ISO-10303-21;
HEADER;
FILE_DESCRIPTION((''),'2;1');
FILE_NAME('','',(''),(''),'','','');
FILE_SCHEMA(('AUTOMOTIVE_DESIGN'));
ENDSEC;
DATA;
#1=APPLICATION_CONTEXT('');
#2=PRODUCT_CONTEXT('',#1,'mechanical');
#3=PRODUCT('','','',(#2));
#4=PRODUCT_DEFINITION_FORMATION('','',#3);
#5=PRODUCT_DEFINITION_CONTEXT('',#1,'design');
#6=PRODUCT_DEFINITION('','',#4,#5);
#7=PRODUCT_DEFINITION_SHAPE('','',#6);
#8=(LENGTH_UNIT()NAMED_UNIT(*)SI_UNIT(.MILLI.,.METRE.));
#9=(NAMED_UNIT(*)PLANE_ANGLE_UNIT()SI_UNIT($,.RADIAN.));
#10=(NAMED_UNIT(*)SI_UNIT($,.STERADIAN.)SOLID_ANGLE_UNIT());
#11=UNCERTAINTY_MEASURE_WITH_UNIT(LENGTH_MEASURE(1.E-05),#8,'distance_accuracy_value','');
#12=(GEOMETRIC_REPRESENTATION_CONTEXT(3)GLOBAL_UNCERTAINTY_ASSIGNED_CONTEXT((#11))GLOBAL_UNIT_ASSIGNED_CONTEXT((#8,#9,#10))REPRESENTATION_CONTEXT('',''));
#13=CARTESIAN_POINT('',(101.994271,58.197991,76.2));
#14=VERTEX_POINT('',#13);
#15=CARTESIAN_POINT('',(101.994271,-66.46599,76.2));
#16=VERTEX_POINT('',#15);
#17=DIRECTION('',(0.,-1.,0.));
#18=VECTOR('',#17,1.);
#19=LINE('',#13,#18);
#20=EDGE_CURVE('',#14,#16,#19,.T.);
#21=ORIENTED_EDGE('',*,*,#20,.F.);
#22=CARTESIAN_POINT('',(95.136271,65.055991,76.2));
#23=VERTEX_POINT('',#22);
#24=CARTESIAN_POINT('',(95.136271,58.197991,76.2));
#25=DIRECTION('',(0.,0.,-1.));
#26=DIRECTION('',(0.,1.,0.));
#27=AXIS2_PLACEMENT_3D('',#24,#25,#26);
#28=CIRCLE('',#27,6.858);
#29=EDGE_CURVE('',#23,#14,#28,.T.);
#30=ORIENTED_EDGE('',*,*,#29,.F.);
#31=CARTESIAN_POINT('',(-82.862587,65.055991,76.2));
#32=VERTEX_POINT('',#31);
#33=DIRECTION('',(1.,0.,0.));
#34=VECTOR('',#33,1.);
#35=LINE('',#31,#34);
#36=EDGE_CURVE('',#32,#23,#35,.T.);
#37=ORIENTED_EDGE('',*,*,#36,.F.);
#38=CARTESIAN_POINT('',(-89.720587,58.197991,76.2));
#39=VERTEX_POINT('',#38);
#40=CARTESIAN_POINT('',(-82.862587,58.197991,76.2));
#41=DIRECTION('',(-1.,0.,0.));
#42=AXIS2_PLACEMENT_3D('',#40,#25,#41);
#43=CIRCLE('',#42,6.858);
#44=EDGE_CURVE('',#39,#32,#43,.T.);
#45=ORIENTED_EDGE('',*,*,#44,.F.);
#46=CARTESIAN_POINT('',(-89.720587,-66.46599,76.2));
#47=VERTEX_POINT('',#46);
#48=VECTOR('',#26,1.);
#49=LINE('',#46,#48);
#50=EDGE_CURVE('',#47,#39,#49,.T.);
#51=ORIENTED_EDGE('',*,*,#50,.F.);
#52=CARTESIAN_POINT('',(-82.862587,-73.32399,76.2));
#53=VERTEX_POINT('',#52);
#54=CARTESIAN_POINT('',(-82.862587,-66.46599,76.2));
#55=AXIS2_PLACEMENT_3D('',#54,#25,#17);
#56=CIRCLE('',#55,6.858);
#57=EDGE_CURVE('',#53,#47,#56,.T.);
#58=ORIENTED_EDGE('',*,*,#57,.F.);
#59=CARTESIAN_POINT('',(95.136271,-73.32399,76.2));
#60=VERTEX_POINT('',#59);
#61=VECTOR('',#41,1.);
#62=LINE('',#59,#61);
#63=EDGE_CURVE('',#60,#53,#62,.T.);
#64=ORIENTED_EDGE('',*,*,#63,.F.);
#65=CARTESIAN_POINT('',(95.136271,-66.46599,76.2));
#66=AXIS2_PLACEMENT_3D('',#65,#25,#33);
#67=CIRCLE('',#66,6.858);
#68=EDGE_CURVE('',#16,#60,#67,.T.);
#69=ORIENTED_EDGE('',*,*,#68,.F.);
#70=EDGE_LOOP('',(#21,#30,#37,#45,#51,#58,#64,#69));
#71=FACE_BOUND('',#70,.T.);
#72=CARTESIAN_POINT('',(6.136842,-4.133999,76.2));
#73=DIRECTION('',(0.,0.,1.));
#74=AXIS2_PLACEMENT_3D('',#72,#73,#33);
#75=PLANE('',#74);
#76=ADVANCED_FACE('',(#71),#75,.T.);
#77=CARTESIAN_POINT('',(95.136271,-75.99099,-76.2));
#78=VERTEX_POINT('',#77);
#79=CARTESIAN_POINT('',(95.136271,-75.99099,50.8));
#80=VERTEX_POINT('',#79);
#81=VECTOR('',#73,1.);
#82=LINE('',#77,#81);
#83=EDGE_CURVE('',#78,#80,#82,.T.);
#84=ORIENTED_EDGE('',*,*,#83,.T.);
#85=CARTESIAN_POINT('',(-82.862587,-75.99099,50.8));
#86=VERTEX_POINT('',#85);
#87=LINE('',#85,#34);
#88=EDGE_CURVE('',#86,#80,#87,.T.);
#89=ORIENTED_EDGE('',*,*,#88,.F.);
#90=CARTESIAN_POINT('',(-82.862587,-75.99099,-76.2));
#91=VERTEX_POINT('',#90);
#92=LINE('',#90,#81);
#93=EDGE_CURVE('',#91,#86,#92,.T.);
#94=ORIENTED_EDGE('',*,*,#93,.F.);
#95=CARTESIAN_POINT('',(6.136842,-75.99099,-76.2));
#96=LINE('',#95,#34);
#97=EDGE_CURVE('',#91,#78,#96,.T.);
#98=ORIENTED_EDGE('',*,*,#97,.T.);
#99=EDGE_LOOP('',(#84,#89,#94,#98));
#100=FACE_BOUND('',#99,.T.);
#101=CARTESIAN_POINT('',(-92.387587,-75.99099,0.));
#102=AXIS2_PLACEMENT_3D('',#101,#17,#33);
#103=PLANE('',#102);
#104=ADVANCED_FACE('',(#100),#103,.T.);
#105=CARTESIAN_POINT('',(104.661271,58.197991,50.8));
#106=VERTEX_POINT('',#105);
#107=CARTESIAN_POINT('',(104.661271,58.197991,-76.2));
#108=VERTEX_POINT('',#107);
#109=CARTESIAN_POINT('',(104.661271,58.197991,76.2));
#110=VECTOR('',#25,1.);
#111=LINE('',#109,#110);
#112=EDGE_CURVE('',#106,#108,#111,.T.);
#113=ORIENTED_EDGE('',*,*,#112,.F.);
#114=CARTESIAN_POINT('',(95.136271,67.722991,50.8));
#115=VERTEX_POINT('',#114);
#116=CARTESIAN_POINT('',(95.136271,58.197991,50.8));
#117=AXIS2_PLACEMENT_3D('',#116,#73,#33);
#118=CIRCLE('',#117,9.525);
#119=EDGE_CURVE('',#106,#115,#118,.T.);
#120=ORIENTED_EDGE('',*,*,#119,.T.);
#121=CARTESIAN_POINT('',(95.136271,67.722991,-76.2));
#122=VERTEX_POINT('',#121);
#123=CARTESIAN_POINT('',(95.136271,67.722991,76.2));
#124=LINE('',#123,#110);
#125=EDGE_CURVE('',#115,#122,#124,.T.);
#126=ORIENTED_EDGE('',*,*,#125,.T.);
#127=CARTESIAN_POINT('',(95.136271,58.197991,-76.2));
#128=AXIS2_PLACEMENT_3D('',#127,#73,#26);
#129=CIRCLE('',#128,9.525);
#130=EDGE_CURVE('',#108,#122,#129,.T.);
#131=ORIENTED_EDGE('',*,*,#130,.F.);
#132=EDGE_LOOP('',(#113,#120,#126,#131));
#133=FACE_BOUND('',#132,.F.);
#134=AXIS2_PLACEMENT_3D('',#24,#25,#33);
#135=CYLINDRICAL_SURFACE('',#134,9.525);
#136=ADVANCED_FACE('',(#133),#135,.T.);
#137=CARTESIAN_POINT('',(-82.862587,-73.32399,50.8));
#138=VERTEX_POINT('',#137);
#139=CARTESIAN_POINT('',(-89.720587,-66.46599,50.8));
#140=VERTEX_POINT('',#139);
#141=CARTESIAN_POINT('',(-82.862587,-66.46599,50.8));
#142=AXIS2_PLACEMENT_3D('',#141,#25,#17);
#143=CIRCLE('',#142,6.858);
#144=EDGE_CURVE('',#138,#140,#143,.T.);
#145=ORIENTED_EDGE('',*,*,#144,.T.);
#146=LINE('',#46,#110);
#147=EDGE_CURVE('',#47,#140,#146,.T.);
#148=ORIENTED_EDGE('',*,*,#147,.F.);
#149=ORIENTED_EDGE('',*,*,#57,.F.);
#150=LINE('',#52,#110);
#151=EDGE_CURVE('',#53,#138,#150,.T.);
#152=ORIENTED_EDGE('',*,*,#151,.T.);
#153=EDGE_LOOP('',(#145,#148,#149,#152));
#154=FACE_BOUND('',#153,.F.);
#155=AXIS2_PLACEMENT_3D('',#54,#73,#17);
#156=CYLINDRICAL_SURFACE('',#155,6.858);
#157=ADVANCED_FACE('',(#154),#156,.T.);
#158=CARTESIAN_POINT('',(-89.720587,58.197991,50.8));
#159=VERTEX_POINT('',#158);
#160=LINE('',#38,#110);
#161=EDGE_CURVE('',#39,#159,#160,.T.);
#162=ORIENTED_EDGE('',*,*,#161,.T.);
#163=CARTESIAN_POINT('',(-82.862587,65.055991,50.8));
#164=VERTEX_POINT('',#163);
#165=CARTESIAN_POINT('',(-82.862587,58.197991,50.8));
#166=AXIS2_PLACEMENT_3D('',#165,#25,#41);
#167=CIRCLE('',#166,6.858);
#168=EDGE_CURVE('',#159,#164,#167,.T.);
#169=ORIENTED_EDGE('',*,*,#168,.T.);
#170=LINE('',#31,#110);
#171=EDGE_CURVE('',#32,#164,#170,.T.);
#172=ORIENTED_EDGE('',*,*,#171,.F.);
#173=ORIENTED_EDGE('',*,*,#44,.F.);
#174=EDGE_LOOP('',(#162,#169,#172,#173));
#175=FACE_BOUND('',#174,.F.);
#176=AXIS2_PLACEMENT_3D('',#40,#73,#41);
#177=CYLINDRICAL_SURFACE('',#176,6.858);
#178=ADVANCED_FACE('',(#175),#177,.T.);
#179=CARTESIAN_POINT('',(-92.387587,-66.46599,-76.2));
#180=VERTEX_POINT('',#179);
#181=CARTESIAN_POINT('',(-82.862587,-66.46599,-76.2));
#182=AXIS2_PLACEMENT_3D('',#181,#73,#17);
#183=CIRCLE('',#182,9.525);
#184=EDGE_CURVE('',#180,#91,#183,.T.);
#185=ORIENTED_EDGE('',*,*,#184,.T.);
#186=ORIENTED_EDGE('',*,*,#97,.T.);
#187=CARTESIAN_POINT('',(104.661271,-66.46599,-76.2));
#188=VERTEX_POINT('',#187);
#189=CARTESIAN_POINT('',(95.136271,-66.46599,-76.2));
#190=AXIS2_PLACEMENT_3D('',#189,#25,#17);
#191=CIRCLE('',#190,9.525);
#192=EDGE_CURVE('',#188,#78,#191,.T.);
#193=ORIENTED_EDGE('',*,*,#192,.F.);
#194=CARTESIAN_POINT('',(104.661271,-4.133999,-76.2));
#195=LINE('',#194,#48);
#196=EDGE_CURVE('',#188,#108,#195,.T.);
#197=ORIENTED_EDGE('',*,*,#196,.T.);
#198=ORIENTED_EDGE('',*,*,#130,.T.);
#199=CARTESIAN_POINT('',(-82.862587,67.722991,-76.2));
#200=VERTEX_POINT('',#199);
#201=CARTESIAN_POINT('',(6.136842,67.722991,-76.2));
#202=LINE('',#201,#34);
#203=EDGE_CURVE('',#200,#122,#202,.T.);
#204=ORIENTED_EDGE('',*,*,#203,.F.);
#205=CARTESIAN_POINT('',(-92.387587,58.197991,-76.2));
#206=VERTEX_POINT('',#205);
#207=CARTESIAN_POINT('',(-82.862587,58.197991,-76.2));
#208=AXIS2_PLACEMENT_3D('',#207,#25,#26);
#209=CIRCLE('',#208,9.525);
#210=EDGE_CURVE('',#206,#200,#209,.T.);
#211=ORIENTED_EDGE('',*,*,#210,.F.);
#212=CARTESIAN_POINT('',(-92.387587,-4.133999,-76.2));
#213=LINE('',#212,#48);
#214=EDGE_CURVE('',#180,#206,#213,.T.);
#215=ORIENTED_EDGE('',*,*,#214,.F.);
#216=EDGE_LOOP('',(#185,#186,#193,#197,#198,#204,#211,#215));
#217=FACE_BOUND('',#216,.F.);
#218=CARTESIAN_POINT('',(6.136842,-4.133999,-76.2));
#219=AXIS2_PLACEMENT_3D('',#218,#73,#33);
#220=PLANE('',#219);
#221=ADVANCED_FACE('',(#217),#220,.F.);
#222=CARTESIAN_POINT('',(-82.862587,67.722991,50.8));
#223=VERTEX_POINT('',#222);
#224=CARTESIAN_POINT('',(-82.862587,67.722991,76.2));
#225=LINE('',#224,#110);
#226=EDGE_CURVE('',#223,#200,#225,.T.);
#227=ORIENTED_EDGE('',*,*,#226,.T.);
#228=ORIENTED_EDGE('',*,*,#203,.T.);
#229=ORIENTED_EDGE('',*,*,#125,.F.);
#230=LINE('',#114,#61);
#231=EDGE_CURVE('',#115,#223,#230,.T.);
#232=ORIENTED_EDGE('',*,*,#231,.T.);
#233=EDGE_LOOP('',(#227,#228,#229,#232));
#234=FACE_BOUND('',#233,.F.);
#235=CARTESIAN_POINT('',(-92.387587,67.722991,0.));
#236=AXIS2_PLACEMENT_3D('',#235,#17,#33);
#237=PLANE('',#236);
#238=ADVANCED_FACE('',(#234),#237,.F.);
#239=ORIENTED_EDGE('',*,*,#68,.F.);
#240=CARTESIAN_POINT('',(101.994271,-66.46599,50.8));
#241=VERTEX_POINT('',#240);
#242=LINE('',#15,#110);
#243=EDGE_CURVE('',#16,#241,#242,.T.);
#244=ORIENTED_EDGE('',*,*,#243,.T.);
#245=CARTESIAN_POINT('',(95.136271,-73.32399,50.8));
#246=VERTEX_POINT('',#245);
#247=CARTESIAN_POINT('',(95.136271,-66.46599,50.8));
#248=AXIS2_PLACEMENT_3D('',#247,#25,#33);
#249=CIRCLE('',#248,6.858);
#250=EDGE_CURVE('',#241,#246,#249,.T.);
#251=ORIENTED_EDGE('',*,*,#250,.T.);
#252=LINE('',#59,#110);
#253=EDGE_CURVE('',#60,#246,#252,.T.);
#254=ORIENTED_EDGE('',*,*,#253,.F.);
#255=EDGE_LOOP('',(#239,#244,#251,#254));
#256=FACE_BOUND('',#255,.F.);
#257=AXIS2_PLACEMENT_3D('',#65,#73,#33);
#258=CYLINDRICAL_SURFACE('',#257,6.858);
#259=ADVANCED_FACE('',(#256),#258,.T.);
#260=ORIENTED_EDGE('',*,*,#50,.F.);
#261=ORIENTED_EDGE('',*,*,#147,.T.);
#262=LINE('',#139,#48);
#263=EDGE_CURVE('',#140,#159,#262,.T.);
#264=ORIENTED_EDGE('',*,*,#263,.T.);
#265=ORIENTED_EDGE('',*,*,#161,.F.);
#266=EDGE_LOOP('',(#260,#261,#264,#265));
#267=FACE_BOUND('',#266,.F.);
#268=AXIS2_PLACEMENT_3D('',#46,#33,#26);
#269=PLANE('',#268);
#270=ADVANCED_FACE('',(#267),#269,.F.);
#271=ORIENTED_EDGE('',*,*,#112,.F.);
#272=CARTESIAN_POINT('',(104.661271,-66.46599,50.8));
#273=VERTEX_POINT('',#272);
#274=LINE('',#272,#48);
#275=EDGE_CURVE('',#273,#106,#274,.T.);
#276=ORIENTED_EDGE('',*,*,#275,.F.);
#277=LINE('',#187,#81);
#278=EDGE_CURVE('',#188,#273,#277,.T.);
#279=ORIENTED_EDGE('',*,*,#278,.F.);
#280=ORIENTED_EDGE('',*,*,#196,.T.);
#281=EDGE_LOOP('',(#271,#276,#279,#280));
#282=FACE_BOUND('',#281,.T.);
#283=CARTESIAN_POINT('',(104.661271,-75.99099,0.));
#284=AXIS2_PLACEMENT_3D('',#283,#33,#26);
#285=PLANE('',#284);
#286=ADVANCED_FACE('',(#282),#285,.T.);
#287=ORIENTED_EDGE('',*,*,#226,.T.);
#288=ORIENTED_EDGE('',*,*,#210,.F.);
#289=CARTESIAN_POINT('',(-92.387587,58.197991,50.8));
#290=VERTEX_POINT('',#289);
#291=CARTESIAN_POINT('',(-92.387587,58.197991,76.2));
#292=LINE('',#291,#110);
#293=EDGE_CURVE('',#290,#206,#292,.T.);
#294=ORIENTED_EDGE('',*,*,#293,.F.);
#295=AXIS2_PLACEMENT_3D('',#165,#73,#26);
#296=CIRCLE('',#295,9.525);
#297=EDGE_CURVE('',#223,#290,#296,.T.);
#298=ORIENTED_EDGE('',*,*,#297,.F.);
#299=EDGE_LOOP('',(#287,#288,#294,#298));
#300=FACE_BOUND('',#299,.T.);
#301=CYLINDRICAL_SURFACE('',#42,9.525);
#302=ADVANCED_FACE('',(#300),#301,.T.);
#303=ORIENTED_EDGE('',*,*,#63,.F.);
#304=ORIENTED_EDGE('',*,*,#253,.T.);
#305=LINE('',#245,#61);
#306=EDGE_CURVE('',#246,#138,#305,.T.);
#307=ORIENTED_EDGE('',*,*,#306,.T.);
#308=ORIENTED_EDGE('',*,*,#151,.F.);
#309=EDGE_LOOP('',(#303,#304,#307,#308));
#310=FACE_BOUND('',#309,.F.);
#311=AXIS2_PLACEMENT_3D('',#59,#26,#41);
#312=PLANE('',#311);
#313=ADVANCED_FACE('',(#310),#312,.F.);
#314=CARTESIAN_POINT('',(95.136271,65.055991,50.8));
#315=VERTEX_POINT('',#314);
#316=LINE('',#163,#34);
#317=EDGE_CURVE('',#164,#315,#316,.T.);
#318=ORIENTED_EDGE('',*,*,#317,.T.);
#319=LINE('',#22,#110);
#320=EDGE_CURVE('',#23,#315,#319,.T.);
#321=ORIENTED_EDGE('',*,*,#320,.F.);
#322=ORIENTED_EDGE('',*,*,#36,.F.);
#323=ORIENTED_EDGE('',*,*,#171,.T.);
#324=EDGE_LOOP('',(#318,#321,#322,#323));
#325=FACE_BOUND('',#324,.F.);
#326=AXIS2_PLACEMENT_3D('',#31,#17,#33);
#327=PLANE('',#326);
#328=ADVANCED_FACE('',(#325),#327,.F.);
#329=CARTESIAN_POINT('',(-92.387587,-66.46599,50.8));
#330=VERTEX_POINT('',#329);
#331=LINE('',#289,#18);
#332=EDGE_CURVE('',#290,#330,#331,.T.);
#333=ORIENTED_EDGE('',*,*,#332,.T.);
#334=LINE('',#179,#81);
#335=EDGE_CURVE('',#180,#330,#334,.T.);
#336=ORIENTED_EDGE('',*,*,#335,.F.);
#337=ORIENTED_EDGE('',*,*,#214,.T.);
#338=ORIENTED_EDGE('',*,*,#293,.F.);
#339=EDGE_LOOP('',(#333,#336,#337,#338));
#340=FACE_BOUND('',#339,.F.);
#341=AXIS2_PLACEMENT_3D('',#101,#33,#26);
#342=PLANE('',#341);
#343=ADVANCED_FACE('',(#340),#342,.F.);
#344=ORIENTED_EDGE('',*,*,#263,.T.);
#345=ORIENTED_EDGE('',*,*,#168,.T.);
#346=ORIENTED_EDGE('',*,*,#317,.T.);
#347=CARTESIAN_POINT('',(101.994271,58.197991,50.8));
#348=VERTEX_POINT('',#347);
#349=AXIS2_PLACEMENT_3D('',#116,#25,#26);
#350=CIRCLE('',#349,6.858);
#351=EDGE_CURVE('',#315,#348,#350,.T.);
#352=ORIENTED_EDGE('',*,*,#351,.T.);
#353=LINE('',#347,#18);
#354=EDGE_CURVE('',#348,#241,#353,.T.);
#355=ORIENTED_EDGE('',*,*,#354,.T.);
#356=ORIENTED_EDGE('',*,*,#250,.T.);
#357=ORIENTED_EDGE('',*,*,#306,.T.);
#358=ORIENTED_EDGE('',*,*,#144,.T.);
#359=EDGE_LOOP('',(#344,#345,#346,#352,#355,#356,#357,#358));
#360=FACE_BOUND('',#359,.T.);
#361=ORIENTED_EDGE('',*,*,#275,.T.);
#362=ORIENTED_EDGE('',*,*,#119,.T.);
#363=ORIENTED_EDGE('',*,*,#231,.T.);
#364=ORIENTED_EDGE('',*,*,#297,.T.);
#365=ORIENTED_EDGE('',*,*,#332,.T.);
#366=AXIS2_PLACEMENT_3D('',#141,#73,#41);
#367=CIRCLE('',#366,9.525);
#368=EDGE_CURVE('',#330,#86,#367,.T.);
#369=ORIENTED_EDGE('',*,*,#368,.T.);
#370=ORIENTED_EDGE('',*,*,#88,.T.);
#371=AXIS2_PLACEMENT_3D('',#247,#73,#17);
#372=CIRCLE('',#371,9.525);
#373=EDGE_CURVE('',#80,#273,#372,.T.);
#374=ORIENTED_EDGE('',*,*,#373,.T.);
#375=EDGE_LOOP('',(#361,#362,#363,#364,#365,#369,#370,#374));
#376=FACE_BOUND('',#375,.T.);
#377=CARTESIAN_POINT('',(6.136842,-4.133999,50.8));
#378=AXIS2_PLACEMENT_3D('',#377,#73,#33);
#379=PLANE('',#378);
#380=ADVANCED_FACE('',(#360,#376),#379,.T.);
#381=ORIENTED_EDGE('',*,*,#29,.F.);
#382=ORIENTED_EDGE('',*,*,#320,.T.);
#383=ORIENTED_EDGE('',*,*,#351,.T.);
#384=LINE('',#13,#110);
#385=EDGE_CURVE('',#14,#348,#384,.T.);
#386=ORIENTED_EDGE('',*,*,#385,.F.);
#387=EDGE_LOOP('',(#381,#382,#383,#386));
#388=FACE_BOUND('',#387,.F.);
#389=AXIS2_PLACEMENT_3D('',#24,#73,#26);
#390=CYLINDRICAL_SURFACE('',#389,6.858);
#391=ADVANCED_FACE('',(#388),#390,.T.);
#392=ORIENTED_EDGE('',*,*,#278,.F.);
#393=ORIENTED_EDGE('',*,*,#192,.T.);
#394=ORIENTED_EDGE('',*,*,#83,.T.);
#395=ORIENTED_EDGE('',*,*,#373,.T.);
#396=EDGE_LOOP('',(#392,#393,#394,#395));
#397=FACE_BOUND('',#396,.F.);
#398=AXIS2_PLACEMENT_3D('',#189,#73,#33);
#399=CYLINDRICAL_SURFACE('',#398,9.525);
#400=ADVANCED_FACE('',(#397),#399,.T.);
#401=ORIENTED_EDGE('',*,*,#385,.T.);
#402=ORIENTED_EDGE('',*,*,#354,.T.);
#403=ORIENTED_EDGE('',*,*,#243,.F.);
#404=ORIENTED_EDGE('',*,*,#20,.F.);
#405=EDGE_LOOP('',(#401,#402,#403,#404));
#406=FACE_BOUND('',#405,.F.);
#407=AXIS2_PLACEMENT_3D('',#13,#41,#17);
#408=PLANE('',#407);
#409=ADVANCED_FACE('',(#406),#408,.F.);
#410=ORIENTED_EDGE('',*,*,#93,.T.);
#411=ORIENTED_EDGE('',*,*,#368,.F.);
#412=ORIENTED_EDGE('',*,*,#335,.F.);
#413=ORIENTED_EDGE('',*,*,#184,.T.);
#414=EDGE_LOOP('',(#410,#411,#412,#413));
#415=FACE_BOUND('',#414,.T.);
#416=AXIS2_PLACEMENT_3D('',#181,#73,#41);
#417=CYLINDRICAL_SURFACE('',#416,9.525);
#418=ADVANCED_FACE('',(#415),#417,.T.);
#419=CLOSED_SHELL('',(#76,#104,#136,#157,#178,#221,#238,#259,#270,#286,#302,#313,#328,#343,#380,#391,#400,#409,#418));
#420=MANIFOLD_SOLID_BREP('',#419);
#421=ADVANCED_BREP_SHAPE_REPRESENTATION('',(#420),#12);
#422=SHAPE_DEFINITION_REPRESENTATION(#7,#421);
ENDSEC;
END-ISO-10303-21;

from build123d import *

# Parameters (mm, degrees)
F0_W     = 197.0488578081
F0_H     = 143.7139809132
F1_DEPTH = 76.2
F2_R     = 9.525
F4_DEPTH = 25.4


with BuildPart() as f1:
    # F0 (on Top) → F1 (new body, symmetric)
    with BuildSketch(Plane.XY):
        with Locations((6.136842072, -4.1339993477)):
            Rectangle(F0_W, F0_H)
    extrude(amount=F1_DEPTH, both=True)

    # F2
    f2_edges = [f1.edges().sort_by_distance(p)[0] for p in [
        (-92.387587, -75.99099, 0),
        (-92.387587, 67.722991, 0),
        (104.661271, 67.722991, 0),
        (104.661271, -75.99099, 0),
    ]]
    fillet(f2_edges, radius=F2_R)

    # F3 (on face) → F4 (cut)
    with BuildSketch(Plane.XY.offset(76.2)):
        with BuildLine():
            Line((95.1362709761, 67.7229911089), (-82.862586832, 67.7229911089))
            ThreePointArc((-82.862586832, 67.7229911089), (-89.5977789228, 64.9331831997), (-92.387586832, 58.1979911089))
            Line((-92.387586832, 58.1979911089), (-92.387586832, -66.4659898043))
            ThreePointArc((-92.387586832, -66.4659898043), (-89.5977789228, -73.2011818951), (-82.862586832, -75.9909898043))
            Line((-82.862586832, -75.9909898043), (95.1362709761, -75.9909898043))
            ThreePointArc((95.1362709761, -75.9909898043), (101.8714630669, -73.2011818951), (104.6612709761, -66.4659898043))
            Line((104.6612709761, -66.4659898043), (104.6612709761, 58.1979911089))
            ThreePointArc((104.6612709761, 58.1979911089), (101.8714630669, 64.9331831997), (95.1362709761, 67.7229911089))
        make_face()
        with BuildLine():
            ThreePointArc((-89.720586832, 58.1979911089), (-87.7119251374, 63.0473294143), (-82.862586832, 65.0559911089))
            Line((-82.862586832, 65.0559911089), (95.1362709761, 65.0559911089))
            ThreePointArc((95.1362709761, 65.0559911089), (99.9856092814, 63.0473294143), (101.9942709761, 58.1979911089))
            Line((101.9942709761, 58.1979911089), (101.9942709761, -66.4659898043))
            ThreePointArc((101.9942709761, -66.4659898043), (99.9856092814, -71.3153281096), (95.1362709761, -73.3239898043))
            Line((95.1362709761, -73.3239898043), (-82.862586832, -73.3239898043))
            ThreePointArc((-82.862586832, -73.3239898043), (-87.7119251374, -71.3153281096), (-89.720586832, -66.4659898043))
            Line((-89.720586832, -66.4659898043), (-89.720586832, 58.1979911089))
        make_face(mode=Mode.SUBTRACT)
    extrude(amount=-F4_DEPTH, mode=Mode.SUBTRACT)


solid = f1.part
